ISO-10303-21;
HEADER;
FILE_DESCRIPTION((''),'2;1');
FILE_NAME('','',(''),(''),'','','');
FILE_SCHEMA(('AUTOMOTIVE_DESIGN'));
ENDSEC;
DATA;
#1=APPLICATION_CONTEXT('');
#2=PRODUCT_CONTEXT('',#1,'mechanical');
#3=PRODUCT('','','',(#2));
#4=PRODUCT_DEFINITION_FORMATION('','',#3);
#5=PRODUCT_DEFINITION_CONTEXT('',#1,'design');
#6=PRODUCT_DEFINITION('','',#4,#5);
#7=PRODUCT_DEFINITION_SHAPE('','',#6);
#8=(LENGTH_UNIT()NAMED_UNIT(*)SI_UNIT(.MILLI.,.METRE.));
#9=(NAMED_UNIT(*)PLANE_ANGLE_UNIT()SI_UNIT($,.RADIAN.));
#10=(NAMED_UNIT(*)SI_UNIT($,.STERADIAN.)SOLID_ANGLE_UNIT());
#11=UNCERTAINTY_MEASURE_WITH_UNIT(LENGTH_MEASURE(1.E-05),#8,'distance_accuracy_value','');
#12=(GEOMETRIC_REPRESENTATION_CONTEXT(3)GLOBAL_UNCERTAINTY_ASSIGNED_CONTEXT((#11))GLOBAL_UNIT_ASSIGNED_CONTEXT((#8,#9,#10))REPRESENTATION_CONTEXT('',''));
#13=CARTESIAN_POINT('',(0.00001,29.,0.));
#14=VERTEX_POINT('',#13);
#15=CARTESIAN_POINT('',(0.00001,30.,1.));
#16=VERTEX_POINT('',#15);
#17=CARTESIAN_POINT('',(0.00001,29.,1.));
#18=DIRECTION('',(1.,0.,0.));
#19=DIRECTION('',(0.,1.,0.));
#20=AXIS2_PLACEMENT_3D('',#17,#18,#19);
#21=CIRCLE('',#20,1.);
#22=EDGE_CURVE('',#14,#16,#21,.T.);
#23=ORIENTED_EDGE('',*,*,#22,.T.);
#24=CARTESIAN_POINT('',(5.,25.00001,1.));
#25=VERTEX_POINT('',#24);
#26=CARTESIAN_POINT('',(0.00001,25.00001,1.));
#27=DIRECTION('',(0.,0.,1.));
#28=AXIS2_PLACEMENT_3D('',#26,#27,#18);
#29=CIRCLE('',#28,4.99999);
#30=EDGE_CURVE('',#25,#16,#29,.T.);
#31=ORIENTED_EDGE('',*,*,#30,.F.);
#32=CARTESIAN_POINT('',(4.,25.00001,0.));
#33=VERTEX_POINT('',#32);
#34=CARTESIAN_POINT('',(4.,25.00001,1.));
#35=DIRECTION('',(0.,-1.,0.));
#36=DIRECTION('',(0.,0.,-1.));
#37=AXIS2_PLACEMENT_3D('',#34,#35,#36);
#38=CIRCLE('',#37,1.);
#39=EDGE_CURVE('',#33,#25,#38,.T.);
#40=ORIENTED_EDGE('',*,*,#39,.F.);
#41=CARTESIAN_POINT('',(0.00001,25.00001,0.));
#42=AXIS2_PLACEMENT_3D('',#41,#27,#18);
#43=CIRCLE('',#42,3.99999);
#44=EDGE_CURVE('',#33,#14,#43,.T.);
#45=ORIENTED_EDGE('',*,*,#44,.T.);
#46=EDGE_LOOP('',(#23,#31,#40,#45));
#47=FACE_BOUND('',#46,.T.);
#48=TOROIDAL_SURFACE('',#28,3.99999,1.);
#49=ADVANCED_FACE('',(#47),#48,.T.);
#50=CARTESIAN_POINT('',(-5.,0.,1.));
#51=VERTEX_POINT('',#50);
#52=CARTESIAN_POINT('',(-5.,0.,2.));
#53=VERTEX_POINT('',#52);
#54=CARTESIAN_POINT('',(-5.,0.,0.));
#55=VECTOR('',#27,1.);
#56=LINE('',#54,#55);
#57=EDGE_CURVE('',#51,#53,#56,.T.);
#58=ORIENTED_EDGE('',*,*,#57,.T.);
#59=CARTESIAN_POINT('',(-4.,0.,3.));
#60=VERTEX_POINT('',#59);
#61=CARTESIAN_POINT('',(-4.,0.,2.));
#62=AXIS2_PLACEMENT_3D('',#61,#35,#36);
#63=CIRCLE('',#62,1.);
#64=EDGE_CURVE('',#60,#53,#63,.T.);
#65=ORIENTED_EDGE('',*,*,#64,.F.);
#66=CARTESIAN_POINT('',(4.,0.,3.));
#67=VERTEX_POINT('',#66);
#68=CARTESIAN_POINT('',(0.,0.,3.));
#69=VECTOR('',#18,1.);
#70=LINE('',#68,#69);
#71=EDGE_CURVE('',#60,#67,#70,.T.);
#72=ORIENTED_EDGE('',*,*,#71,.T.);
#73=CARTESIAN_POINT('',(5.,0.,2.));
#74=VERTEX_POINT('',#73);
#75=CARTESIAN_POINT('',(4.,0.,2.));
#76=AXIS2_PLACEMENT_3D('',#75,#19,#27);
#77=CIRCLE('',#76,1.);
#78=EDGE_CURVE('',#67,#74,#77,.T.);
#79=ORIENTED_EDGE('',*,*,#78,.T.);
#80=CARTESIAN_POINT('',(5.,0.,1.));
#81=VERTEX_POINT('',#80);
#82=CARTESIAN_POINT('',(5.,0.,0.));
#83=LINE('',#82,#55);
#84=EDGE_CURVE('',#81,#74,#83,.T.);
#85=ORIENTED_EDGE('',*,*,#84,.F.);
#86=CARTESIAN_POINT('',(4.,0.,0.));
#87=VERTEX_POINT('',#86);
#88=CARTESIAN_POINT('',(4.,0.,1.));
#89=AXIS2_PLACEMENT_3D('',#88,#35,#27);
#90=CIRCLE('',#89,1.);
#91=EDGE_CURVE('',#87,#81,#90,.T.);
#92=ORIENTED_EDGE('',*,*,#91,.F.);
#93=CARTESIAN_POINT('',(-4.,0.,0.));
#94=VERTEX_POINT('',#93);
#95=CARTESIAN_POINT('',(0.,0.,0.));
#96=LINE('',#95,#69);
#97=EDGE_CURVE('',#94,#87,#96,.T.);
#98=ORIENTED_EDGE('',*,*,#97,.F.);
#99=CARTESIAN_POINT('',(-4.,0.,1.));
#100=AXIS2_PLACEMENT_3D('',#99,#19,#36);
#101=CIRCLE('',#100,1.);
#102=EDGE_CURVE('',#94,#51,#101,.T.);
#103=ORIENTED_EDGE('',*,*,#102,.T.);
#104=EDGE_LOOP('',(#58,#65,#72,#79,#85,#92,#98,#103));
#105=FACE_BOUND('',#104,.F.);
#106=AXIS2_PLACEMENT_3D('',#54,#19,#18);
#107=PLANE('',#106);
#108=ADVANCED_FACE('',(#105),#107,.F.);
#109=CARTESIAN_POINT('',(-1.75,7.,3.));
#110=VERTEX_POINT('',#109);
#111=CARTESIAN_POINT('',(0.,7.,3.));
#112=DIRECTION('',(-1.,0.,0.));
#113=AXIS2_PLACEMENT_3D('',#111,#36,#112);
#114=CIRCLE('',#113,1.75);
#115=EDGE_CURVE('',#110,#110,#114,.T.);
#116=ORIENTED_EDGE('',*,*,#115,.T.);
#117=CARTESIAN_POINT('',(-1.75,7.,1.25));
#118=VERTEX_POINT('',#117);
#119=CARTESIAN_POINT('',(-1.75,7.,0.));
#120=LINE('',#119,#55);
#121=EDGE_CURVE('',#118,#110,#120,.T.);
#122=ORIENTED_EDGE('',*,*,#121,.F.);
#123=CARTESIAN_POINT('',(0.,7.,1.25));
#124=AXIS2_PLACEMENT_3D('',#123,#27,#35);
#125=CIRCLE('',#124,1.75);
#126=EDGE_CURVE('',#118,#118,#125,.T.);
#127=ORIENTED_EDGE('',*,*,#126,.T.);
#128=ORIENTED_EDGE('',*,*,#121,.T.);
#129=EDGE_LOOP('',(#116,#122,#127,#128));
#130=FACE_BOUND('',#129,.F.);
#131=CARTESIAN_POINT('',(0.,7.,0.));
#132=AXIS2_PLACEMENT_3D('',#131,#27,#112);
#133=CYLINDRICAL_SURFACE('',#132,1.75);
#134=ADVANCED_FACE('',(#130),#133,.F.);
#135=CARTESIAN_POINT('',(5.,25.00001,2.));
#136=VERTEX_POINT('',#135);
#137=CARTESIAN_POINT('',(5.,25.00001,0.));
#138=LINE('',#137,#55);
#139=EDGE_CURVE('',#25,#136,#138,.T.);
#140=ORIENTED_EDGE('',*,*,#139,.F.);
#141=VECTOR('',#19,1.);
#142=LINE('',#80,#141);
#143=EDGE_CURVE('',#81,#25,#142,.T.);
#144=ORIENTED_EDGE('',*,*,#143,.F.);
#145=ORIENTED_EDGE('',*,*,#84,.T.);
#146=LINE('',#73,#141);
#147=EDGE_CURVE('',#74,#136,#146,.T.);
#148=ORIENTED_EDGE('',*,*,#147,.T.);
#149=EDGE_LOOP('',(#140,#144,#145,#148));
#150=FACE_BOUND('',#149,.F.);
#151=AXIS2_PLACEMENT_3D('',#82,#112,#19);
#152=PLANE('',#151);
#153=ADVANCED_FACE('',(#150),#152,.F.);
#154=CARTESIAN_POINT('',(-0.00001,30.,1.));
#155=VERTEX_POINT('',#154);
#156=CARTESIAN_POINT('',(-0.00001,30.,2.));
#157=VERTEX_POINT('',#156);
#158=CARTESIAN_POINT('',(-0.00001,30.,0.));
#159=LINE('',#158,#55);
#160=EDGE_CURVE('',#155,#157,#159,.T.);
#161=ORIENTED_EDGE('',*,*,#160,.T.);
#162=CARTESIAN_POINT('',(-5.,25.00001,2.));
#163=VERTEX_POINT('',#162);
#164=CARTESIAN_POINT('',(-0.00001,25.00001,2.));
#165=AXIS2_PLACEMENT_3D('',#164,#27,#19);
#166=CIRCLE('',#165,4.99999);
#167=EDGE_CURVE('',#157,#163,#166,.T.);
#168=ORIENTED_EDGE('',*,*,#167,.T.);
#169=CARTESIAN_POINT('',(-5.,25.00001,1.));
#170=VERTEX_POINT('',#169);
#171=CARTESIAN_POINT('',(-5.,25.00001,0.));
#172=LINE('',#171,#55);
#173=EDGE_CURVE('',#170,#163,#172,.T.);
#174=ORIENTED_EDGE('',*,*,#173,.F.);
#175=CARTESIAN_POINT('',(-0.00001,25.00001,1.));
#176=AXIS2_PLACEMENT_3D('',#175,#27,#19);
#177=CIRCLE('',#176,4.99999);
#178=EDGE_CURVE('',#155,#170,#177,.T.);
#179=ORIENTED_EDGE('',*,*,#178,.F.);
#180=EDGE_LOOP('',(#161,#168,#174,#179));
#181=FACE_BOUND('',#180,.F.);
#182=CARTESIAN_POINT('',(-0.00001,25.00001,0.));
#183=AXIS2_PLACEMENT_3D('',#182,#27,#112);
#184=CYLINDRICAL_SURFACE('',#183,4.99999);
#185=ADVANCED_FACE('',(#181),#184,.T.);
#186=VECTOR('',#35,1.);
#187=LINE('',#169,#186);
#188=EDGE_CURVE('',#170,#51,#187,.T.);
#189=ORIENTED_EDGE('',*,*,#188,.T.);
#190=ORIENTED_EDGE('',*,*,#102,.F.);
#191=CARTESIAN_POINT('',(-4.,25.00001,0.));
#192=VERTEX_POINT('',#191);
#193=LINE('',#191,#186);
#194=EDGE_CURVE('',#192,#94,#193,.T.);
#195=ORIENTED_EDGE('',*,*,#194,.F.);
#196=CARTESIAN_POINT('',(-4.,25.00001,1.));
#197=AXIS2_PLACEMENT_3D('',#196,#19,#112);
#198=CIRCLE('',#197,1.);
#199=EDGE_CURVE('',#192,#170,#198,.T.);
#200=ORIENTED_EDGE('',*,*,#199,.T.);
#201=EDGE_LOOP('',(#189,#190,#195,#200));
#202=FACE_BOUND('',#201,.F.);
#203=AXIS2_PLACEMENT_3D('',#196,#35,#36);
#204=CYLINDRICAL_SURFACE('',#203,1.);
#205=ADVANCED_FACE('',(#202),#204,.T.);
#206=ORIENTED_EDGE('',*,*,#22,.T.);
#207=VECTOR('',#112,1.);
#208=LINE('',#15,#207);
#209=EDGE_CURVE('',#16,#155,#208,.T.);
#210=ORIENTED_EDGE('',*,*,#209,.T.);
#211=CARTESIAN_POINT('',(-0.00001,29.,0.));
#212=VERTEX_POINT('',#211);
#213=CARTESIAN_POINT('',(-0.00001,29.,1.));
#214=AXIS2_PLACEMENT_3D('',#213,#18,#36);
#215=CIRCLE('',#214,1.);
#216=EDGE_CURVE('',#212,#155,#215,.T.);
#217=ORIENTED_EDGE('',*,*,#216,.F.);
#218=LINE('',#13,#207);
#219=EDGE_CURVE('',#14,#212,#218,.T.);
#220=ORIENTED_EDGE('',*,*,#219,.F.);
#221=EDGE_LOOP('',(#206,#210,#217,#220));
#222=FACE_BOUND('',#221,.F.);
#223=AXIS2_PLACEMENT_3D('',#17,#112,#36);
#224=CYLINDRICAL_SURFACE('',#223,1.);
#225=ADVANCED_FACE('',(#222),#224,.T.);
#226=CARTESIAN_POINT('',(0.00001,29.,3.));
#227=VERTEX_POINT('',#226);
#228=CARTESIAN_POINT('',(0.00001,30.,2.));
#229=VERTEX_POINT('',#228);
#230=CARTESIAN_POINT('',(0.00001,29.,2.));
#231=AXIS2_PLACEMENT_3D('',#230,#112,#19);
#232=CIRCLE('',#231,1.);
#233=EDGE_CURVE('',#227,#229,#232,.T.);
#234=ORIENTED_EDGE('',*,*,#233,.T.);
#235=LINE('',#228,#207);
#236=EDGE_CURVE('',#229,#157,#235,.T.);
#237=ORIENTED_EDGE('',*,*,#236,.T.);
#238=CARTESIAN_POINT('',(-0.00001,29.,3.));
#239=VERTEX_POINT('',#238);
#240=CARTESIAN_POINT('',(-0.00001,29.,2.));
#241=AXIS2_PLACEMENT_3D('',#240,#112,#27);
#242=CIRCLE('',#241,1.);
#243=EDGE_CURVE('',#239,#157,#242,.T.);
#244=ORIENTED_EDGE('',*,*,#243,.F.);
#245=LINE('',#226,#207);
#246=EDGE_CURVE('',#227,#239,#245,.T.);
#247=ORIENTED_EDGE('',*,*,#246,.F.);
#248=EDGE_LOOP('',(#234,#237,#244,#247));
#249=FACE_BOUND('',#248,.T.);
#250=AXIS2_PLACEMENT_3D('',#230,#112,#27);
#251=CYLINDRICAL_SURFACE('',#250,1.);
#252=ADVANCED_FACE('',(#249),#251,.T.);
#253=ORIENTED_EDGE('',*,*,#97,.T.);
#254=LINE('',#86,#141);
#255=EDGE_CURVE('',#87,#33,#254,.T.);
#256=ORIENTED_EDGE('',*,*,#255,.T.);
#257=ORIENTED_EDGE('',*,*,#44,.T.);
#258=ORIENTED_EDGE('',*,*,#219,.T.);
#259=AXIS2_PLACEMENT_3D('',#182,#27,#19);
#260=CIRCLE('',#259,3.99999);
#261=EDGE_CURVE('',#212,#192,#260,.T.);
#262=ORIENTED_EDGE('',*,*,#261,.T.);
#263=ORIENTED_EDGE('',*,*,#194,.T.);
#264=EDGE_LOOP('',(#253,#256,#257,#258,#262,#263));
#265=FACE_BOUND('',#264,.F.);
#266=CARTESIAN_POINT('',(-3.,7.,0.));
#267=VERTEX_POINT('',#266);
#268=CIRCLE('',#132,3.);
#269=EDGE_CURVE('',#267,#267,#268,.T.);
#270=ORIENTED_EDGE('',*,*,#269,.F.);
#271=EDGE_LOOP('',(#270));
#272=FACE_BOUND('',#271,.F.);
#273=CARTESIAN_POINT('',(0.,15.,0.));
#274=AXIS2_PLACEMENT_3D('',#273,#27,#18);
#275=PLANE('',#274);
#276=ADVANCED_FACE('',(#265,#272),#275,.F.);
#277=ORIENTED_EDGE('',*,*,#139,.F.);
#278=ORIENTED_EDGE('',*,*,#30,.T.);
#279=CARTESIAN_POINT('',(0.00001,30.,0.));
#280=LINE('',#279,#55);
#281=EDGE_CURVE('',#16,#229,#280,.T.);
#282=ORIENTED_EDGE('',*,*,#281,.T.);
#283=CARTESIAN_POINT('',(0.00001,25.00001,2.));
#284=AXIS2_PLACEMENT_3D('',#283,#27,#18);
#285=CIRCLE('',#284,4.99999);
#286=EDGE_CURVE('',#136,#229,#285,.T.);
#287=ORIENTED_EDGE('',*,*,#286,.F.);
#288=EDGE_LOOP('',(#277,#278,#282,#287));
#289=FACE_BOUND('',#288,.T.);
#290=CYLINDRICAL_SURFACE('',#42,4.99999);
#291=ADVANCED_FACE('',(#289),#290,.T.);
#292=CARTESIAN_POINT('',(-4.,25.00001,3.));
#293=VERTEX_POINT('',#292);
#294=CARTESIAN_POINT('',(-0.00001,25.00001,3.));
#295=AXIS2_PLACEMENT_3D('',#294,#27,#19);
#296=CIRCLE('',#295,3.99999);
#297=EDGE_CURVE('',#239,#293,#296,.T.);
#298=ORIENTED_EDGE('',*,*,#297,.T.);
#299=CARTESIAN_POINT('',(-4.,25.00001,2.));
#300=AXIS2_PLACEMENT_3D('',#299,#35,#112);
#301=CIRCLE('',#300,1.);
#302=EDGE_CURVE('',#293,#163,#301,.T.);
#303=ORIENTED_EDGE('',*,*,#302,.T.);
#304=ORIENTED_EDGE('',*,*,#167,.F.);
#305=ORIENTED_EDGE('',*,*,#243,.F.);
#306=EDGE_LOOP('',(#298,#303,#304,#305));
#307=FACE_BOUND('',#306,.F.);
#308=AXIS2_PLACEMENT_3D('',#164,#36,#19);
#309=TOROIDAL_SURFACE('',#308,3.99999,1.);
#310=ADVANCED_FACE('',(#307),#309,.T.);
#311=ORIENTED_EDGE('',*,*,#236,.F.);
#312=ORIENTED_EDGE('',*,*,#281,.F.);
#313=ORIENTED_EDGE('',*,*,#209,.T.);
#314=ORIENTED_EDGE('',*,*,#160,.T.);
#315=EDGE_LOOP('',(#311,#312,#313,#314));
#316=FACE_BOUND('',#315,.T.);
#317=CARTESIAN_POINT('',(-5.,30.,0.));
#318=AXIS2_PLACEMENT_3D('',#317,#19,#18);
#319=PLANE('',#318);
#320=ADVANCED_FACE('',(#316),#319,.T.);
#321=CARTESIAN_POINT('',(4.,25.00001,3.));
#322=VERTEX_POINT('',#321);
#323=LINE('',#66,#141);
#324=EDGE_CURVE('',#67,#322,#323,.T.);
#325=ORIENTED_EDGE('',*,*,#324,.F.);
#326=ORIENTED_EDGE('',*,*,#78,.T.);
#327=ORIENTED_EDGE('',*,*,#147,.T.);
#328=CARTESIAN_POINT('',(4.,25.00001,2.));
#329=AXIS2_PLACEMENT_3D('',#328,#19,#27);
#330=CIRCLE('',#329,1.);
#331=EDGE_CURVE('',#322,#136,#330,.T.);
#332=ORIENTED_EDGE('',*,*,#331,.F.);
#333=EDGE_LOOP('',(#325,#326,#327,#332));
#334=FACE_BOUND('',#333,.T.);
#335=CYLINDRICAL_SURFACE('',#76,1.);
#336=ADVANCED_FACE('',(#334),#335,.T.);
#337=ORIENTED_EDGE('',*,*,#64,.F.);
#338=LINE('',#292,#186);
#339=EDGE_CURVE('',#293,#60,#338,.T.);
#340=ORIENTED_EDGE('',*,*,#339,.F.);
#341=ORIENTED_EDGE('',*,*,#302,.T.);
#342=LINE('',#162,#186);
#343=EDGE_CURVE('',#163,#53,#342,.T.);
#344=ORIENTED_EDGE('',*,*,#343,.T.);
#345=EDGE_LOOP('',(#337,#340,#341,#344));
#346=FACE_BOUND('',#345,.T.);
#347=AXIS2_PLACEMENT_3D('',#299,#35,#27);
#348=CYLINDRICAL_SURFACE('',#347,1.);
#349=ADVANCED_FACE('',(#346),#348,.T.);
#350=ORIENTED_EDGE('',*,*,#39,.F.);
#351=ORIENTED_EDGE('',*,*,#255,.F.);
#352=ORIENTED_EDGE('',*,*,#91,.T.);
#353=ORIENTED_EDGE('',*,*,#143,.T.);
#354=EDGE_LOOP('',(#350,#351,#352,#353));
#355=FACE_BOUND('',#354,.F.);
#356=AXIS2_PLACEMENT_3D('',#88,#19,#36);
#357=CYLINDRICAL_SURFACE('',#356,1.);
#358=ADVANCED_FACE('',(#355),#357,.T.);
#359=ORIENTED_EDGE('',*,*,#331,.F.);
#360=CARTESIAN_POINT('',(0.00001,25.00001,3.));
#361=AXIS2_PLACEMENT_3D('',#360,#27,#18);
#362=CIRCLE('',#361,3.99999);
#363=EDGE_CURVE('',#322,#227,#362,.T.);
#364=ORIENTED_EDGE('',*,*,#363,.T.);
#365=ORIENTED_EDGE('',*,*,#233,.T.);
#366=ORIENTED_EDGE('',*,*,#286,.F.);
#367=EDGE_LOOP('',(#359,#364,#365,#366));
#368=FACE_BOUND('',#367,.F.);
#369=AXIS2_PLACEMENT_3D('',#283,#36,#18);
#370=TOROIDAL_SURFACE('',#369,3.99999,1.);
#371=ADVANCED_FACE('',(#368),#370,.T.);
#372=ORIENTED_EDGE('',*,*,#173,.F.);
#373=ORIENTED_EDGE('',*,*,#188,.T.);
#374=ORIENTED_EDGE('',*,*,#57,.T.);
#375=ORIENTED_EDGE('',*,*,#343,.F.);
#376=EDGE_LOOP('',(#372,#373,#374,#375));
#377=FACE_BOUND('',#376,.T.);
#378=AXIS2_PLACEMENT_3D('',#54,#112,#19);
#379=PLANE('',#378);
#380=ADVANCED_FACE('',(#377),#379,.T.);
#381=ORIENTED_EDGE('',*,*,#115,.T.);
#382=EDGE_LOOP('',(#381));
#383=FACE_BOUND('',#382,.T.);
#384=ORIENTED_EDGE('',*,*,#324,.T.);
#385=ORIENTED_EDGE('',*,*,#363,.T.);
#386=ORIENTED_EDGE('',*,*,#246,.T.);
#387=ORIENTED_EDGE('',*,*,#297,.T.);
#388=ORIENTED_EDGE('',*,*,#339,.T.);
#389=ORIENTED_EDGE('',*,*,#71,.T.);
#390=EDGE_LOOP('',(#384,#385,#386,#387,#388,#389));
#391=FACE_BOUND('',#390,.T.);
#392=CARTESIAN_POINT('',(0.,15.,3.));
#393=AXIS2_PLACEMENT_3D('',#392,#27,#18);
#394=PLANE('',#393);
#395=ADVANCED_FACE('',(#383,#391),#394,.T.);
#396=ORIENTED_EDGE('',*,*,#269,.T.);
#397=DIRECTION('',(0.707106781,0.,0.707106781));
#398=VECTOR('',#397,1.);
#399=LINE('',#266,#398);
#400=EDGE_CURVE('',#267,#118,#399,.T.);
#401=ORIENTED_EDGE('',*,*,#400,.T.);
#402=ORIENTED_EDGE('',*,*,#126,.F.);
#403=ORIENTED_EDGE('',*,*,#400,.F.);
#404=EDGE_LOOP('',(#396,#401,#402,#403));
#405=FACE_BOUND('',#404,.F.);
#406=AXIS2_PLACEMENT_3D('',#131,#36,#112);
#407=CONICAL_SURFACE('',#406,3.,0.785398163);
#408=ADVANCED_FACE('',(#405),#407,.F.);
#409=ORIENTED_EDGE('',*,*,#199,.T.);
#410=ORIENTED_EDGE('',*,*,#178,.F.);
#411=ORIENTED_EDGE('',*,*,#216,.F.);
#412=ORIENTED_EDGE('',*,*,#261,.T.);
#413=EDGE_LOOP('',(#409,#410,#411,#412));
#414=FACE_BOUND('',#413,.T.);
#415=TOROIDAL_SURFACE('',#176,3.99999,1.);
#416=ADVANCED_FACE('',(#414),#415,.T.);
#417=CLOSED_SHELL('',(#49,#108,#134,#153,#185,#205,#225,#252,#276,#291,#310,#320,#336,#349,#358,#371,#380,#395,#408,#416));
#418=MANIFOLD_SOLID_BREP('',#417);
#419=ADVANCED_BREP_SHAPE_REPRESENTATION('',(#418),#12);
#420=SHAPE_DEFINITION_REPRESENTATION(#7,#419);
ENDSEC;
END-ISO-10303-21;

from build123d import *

# Parameters (mm, degrees)
F0_W           = 10
F0_H           = 30
F1_DEPTH       = 3
F2_D           = 3.5
F2_DEPTH       = 3
F2_CSINK_D     = 6
F2_CSINK_ANGLE = 90
F2_TIP         = 1.0515060833
F3_R           = 4.99999
F4_R           = 1


# Not quite as in the source:
# - a fillet or chamfer is up to 0.001 mm smaller than in the source, because OpenCascade refuses the exact size


with BuildPart() as f1:
    # F0 (on Top) → F1 (new body)
    with BuildSketch(Plane.XY):
        with Locations((0, 15)):
            Rectangle(F0_W, F0_H)
    extrude(amount=F1_DEPTH)

    # F2
    with Locations(Plane(origin=(0, 0, 0), x_dir=(1, 0, 0), z_dir=(0, 0, -1))):
        with Locations((0, -7)):
            CounterSinkHole(F2_D / 2, F2_CSINK_D / 2, depth=F2_DEPTH, counter_sink_angle=F2_CSINK_ANGLE)
            with Locations((0, 0, -(F2_DEPTH + F2_TIP / 2))):  # 118° drill point
                Cone(0, F2_D / 2, F2_TIP, mode=Mode.SUBTRACT)

    # F3 (radius 5 in the source; OpenCascade refuses exactly that, so slightly less here)
    f3_edges = [f1.edges().sort_by_distance(p)[0] for p in [
        (5, 30, 1.5),
        (-5, 30, 1.5),
    ]]
    fillet(f3_edges, radius=F3_R)

    # F4
    f4_edges = [f1.edges().sort_by_distance(p)[0] for p in [
        (3.535537, 28.535537, 0),
        (3.535537, 28.535537, 3),
        (-5, 12.500005, 3),
        (5, 12.500005, 3),
    ]]
    fillet(f4_edges, radius=F4_R)


solid = f1.part
